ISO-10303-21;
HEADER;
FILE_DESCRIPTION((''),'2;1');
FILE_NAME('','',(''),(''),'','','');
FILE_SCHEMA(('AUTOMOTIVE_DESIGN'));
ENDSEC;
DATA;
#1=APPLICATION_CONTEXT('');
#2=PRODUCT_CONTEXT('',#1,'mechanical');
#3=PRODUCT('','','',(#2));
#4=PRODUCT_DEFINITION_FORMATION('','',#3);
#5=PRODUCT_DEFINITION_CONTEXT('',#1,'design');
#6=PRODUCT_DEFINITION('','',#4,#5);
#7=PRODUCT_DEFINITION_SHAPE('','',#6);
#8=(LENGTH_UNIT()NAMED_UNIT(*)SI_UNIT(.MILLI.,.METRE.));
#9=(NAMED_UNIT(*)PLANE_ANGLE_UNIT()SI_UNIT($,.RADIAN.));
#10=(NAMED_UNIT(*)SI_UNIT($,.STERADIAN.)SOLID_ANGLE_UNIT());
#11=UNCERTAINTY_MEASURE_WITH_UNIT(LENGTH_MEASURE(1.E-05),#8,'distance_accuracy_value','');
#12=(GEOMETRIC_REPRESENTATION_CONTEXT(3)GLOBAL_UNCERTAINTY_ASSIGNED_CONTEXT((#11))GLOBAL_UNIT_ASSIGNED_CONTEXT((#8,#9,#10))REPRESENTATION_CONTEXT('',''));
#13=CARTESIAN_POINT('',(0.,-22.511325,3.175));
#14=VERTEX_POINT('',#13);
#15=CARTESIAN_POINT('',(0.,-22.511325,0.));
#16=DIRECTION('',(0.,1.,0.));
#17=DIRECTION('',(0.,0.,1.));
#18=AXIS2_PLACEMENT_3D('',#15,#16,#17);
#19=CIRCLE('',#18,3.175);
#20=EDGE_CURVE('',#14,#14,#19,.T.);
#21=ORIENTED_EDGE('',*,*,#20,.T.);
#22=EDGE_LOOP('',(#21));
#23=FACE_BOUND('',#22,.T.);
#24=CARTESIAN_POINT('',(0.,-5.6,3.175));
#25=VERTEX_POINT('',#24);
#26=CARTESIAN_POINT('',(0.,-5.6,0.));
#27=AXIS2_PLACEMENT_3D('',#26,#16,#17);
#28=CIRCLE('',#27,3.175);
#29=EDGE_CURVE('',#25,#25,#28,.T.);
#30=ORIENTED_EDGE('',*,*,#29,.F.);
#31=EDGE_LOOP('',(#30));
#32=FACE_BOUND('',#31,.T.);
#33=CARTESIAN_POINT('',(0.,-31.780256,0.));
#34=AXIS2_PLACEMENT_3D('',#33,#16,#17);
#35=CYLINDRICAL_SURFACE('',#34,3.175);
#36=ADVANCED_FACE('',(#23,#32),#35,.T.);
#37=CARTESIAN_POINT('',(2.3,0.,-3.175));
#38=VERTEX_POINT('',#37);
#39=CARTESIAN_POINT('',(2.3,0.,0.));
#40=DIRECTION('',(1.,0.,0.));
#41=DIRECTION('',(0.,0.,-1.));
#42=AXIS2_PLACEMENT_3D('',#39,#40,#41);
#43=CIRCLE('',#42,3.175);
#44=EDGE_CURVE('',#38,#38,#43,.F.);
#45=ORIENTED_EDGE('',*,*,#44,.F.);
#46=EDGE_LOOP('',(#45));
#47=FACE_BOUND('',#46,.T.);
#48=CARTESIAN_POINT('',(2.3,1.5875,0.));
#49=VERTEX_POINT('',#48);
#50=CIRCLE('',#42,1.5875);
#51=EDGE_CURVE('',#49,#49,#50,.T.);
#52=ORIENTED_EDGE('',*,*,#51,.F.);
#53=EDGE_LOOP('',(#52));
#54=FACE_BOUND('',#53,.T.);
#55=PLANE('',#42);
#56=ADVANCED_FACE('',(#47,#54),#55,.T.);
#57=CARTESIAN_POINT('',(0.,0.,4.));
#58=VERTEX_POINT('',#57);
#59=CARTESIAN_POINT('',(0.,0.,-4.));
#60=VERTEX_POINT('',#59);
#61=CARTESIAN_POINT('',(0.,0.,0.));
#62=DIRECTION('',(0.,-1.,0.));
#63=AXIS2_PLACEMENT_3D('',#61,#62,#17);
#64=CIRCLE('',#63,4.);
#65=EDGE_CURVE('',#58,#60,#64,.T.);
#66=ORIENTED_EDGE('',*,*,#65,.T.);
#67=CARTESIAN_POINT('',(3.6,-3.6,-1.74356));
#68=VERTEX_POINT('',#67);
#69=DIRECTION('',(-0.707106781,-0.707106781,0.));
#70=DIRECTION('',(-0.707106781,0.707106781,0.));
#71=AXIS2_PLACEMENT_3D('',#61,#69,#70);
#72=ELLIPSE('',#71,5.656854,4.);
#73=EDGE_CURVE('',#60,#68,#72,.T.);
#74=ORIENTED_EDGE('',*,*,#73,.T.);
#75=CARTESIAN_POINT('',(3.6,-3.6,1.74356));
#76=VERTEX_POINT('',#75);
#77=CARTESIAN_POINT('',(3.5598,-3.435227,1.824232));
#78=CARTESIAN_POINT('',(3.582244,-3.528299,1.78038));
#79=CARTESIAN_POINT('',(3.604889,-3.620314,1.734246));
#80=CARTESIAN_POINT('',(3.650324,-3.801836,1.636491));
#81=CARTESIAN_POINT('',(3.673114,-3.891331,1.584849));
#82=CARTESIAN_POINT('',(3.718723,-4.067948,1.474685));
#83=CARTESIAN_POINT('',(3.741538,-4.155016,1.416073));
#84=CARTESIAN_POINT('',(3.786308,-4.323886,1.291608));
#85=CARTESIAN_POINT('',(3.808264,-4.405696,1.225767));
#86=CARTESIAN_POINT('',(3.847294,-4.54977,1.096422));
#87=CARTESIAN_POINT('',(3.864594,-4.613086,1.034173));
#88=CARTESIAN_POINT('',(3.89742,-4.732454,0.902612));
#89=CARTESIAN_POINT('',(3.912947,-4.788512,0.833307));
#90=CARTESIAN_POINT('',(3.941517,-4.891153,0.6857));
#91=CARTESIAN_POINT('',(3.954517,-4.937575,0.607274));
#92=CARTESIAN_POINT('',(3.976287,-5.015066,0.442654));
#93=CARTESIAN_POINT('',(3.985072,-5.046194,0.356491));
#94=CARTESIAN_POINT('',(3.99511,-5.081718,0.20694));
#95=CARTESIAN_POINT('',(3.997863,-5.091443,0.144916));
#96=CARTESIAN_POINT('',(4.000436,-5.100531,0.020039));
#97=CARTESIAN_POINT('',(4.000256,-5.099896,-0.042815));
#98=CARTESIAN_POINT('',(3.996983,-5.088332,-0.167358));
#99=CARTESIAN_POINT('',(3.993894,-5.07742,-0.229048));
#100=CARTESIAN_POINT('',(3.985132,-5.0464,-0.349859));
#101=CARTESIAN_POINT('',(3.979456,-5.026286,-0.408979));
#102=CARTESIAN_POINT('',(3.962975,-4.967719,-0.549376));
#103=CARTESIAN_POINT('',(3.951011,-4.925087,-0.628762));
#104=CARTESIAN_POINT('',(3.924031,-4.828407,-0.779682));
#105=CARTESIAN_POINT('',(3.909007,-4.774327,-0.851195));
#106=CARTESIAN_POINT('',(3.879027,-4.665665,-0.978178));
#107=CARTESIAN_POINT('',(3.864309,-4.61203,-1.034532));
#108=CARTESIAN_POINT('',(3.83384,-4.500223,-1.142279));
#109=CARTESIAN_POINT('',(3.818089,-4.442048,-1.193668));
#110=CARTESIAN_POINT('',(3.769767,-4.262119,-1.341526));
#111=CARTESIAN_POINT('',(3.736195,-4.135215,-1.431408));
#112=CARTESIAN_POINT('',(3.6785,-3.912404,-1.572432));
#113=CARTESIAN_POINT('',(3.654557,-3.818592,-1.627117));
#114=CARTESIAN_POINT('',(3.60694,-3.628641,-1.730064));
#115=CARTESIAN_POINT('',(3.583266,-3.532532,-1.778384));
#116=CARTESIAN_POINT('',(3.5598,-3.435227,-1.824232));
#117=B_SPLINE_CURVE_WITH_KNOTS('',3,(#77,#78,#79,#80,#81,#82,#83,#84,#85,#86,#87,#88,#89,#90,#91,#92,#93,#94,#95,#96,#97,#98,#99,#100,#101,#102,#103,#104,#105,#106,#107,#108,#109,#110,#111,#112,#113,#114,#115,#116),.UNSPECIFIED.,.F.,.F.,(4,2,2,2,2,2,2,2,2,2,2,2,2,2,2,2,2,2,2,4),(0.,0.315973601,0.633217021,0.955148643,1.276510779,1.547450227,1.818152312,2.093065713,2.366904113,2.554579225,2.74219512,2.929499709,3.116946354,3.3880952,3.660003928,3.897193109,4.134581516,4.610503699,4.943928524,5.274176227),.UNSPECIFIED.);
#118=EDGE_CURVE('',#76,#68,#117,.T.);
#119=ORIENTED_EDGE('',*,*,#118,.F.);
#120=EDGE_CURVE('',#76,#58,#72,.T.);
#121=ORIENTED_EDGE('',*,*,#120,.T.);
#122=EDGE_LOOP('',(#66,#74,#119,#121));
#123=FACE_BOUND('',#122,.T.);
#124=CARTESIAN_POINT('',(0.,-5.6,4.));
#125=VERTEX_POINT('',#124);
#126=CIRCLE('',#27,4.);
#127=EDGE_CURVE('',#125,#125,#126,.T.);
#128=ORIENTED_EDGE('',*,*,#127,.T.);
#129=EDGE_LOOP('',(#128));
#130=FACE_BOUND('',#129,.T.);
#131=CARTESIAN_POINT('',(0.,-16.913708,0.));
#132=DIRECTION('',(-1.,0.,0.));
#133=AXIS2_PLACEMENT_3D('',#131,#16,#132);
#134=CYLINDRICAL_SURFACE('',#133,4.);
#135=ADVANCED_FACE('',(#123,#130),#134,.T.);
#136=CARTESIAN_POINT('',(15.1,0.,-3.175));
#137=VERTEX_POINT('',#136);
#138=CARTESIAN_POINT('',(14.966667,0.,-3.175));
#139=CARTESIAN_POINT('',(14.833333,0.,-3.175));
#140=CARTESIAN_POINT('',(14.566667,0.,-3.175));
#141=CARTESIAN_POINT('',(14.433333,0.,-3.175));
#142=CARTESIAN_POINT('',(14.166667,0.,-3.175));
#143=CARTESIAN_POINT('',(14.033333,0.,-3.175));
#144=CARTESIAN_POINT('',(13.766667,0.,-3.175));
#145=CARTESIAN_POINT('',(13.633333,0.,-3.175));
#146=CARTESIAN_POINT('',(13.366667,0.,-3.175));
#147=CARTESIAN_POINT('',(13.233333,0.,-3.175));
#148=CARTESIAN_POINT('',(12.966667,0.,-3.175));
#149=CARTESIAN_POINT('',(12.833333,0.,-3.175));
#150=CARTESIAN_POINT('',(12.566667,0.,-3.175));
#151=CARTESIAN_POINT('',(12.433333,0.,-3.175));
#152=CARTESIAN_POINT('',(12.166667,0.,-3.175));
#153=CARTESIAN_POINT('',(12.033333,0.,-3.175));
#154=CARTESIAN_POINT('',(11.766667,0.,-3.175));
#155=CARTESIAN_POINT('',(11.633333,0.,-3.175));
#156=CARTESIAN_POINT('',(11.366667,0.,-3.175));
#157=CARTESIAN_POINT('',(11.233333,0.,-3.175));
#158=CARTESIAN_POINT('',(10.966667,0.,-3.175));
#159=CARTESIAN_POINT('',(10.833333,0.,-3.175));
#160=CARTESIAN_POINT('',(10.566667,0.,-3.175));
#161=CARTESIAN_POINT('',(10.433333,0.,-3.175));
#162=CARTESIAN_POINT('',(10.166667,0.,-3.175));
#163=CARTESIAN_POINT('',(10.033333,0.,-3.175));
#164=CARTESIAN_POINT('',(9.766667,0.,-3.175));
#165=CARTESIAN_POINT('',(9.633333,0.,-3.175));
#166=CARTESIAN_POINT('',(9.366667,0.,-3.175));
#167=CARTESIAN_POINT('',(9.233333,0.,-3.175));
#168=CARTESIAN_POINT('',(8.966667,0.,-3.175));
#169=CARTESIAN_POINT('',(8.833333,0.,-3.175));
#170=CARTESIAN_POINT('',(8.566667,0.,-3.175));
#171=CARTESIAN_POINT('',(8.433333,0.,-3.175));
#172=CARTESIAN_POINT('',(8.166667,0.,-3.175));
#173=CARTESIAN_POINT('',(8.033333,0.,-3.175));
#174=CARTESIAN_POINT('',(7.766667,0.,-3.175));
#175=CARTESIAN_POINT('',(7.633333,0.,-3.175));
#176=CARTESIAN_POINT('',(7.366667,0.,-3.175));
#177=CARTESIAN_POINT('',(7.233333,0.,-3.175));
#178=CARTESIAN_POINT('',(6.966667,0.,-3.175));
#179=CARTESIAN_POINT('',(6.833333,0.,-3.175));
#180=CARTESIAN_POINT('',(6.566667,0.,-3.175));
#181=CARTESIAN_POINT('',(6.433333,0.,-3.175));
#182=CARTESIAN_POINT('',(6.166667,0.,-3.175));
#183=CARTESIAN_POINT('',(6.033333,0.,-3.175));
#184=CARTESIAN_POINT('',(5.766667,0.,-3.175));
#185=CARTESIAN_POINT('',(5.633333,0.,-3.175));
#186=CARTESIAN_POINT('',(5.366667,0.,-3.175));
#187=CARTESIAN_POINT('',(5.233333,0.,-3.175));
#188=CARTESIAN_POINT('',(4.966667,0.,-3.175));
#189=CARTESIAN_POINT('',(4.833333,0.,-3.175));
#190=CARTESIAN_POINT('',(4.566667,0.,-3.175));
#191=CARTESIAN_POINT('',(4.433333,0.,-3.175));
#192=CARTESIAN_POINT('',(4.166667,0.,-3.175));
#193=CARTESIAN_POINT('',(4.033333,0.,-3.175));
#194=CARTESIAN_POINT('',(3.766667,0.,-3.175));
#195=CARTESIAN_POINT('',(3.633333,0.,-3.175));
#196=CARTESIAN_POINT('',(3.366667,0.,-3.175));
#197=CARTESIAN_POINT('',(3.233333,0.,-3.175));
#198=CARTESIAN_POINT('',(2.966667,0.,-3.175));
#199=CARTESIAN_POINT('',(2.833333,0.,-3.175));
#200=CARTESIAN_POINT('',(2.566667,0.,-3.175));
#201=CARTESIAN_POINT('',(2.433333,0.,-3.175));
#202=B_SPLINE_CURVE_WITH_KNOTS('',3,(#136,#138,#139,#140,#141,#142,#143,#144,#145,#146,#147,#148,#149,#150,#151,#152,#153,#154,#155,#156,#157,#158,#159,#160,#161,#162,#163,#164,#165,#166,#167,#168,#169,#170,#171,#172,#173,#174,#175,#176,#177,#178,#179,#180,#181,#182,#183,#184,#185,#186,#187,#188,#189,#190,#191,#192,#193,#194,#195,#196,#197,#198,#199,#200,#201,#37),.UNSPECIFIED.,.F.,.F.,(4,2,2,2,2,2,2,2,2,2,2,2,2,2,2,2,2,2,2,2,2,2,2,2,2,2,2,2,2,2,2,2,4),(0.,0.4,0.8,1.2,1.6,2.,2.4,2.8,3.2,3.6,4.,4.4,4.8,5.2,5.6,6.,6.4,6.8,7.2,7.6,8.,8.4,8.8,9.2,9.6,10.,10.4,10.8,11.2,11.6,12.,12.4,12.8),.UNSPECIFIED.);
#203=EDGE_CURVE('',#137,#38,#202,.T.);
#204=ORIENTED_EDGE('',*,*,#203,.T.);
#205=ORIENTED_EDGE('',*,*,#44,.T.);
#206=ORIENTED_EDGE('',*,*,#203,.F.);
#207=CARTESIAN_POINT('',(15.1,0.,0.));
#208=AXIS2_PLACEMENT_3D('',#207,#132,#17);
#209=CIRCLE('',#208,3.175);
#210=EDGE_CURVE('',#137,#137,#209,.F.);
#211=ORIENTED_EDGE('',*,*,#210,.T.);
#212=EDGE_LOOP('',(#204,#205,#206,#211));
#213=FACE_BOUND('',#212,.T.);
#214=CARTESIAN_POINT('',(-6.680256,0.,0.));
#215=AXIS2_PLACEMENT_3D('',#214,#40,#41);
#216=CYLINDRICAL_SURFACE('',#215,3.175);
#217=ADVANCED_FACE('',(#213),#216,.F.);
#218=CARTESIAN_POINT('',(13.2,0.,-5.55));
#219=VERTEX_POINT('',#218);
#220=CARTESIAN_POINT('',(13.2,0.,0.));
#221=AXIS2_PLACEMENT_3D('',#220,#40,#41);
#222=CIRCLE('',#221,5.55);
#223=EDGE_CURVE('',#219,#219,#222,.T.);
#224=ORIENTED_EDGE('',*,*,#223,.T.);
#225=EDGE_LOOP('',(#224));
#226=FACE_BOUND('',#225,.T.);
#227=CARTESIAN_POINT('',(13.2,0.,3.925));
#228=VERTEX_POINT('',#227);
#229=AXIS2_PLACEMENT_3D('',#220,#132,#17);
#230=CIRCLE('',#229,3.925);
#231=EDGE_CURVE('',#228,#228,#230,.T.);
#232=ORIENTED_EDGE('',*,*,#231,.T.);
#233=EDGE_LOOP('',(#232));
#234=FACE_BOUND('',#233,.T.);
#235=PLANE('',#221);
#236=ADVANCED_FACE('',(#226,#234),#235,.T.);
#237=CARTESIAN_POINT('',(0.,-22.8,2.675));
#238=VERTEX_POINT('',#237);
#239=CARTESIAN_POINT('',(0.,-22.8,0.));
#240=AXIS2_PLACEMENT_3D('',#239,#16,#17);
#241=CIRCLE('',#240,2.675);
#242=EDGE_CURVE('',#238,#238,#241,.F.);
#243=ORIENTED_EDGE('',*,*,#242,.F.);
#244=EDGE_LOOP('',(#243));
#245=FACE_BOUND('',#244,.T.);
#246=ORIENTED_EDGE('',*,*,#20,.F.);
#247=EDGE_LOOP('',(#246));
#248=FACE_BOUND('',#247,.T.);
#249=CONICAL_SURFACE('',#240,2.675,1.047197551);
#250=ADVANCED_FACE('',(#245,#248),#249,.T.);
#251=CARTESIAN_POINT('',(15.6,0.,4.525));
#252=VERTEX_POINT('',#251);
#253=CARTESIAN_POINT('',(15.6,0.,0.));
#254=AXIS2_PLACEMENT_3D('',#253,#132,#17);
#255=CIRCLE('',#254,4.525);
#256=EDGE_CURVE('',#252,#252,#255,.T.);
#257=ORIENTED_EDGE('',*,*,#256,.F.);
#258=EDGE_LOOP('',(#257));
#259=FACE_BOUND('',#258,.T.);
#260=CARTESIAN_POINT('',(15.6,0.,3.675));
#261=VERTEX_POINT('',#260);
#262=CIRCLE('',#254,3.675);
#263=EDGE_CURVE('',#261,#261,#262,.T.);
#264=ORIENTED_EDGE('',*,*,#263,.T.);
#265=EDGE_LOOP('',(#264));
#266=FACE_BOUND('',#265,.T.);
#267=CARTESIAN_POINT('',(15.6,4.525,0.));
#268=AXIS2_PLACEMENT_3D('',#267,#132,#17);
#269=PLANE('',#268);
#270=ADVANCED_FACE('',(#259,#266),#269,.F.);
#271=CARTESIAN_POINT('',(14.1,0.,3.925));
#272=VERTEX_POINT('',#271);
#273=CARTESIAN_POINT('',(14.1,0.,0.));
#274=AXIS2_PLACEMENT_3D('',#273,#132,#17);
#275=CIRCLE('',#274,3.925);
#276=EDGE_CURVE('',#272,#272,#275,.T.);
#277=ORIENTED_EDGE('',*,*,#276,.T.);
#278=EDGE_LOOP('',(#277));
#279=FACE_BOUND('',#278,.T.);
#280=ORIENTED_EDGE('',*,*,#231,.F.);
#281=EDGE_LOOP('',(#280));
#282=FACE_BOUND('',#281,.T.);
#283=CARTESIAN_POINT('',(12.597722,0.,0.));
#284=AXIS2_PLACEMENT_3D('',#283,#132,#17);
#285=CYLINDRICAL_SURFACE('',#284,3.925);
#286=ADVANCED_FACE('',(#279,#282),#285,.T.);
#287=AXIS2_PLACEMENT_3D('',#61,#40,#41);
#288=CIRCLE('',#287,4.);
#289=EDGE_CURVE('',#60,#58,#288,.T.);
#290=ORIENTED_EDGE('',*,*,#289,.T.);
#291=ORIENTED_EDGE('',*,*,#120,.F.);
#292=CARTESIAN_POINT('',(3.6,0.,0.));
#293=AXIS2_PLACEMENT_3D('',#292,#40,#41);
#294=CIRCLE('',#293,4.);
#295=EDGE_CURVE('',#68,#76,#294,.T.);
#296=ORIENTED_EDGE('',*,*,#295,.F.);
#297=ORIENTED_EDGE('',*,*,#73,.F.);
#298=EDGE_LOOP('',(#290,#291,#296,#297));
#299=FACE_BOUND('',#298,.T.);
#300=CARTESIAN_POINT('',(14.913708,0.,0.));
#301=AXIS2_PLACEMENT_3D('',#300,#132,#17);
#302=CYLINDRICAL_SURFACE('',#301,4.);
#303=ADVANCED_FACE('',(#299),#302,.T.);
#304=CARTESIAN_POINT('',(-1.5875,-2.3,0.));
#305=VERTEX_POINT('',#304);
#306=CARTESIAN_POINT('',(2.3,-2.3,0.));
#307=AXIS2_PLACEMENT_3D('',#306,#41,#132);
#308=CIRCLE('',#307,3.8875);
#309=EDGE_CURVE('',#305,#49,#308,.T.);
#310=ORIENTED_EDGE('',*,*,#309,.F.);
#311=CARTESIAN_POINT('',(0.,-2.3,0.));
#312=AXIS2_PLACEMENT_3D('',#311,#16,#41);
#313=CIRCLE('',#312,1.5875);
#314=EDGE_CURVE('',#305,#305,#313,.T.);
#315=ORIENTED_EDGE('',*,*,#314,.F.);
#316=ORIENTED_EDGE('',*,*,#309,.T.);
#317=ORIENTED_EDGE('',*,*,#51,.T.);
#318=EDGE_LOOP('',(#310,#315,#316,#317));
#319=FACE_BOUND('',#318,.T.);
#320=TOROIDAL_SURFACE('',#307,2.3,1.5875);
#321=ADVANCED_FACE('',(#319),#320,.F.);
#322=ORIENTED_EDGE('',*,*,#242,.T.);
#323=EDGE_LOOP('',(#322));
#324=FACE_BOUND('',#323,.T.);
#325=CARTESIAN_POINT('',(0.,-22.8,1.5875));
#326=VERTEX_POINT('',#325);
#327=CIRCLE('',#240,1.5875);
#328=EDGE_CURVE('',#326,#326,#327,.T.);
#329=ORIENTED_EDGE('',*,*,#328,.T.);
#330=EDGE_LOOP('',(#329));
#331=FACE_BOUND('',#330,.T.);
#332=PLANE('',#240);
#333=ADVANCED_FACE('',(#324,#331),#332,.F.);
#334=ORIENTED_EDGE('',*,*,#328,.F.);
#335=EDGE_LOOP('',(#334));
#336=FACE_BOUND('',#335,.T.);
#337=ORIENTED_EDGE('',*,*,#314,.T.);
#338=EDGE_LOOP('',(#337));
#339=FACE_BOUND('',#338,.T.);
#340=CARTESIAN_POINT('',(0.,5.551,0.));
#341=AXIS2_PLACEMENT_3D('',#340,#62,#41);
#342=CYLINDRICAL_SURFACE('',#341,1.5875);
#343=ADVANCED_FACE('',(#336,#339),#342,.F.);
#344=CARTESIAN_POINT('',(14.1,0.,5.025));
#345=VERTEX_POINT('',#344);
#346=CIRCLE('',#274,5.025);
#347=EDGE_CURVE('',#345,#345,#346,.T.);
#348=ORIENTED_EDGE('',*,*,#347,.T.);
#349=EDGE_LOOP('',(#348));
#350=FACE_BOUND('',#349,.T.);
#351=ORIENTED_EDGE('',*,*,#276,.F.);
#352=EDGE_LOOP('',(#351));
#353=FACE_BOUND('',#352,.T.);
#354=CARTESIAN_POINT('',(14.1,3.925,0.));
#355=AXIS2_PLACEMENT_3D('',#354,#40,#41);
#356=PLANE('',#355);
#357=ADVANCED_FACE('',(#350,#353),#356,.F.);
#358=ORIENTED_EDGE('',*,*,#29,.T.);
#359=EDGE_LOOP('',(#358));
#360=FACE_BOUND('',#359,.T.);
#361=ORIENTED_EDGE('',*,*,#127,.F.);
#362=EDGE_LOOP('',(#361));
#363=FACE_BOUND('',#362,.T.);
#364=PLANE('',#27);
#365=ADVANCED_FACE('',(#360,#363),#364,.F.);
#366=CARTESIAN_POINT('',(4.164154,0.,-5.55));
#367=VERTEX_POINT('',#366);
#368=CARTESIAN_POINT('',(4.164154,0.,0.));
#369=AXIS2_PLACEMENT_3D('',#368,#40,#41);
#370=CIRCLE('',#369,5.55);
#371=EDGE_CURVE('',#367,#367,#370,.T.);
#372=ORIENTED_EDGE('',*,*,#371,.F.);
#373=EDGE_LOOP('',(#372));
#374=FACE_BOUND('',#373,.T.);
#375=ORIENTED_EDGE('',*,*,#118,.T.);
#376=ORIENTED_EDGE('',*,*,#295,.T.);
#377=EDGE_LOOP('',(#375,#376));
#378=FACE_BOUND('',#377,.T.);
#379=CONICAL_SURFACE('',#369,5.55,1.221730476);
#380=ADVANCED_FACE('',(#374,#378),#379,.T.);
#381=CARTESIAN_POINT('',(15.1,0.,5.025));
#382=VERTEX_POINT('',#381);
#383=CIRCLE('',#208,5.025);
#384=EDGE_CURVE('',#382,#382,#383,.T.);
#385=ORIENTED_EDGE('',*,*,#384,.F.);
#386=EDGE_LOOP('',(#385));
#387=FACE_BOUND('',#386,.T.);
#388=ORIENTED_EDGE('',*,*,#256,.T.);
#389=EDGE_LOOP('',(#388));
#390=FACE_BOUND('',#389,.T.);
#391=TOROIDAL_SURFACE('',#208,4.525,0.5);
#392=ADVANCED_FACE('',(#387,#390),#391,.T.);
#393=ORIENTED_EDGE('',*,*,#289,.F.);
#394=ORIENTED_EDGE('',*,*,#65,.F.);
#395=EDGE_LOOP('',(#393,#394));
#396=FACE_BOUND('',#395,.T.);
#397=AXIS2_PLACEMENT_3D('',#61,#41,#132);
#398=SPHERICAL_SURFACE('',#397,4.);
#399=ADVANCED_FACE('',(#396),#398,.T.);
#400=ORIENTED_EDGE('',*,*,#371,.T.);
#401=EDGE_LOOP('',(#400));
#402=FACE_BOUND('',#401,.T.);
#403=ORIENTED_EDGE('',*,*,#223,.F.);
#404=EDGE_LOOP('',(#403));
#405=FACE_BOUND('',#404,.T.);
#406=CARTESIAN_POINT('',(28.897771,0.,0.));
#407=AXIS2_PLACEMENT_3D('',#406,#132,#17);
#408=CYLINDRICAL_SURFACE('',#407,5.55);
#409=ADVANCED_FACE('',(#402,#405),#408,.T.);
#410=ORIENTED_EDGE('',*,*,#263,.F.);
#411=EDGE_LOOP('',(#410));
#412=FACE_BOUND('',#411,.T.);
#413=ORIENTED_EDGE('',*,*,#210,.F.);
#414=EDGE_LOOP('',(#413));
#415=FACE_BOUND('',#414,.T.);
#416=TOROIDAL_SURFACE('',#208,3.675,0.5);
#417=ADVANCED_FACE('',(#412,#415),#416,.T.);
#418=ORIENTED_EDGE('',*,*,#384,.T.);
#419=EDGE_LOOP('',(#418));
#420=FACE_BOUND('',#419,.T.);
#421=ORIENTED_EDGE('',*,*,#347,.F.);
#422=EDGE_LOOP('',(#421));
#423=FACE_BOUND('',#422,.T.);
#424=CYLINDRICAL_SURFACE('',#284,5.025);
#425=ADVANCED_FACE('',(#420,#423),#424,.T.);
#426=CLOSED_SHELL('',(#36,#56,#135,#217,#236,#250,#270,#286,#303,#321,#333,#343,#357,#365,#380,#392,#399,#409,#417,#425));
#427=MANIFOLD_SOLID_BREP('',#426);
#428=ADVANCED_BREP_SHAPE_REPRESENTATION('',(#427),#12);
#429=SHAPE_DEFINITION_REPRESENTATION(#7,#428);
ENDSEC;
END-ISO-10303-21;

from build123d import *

# Parameters (mm, degrees)
SKETCH1_R             = 4
BASE_EXTRUDE_DEPTH    = 3.6
RBODY_SKETCH_R        = 5.55
RBODY_DEPTH           = 9.6
ELBOW_ANGLE           = 90
SKETCH3_R             = 4
BOSS_EXTRUDE1_DEPTH   = 5.6
STEM_SKETCH_R         = 3.175
STEM_DEPTH            = 17.2
RTUBE_START           = -13.3
RTUBE_SKETCH_R        = 3.175
RTUBE_DEPTH           = 13.3
RTUBE_RADIUS_R        = 0.5
DIAMETER_R            = 1.5875
PORT_THREADS_REACH    = 34.831
PORT_THREADS_SKETCH_R = 1.5875


with BuildPart() as part:
    # Sketch1 → Base-Extrude (new body)
    with BuildSketch(Plane(origin=(0, 0, 0), x_dir=(0, 0, -1), z_dir=(1, 0, 0))):
        with Locations(Location((0, 0, 0), (0, 0, 180))):
            Circle(SKETCH1_R)
    extrude(amount=BASE_EXTRUDE_DEPTH)

    # RBody_Sketch → RBody (add)
    with BuildSketch(Plane(origin=(3.6, 0, 0), x_dir=(0, 0, -1), z_dir=(1, 0, 0))):
        Circle(RBODY_SKETCH_R)
    extrude(amount=RBODY_DEPTH)

    # RBody_Chamfer: read off the stored shape, not the designer's step
    # RBody_Chamfer outline → RBody_Chamfer (revolve, cut)
    with BuildSketch(Plane.YX):
        Polygon((5.55, 4.164153863), (4, 3.6), (5.55, 3.6), align=None)
    revolve(axis=Axis((0, 0, 0), (1, 0, 0)), mode=Mode.SUBTRACT)

    # RRelease_Sketch → RRelease (revolve)
    with BuildSketch(Plane.XY, mode=Mode.PRIVATE) as rrelease_sk:
        with BuildLine():
            Line((13.2, 3.925), (14.1, 3.925))
            Line((14.1, 3.925), (14.1, 5.025))
            Line((14.1, 5.025), (15.1, 5.025))
            ThreePointArc((15.1, 5.025), (15.453553391, 4.878553391), (15.6, 4.525))
            Line((15.6, 4.525), (15.6, 0))
            Line((15.6, 0), (13.2, 0))
            Line((13.2, 0), (13.2, 3.925))
        make_face()
    revolve(rrelease_sk.sketch.rotate(Axis((12.597722381, 0, 0), (1, 0, 0)), 90), axis=Axis((12.597722381, 0, 0), (1, 0, 0)))

    # Elbow_Sketch → Elbow (revolve)
    with BuildSketch(Plane.ZY):
        with BuildLine():
            Line((-4, 0), (4, 0))
            ThreePointArc((4, 0), (0, 4), (-4, 0))
        make_face()
    revolve(axis=Axis((0, 0, -6.487672297), (0, 0, 1)), revolution_arc=ELBOW_ANGLE)

    # Sketch3 → Boss-Extrude1 (add)
    with BuildSketch(Plane.XZ):
        with Locations(Location((0, 0, 0), (0, 0, 90))):
            Circle(SKETCH3_R)
    extrude(amount=BOSS_EXTRUDE1_DEPTH)

    # Stem_Sketch → Stem (add)
    with BuildSketch(Plane(origin=(0, -5.6, 0), x_dir=(-1, 0, 0), z_dir=(0, 1, 0))):
        with Locations(Location((0, 0, 0), (0, 0, 90))):
            Circle(STEM_SKETCH_R)
    extrude(amount=-STEM_DEPTH)

    # RTube_Sketch → RTube (cut)
    with BuildSketch(Plane(origin=(15.6, 0, 0), x_dir=(0, 0, -1), z_dir=(1, 0, 0)).offset(RTUBE_START)):
        Circle(RTUBE_SKETCH_R)
    extrude(amount=RTUBE_DEPTH, mode=Mode.SUBTRACT)

    # RTube_Radius
    rtube_radius_edges = [part.edges().sort_by_distance(p)[0] for p in [
        (15.6, 0, 3.175),
    ]]
    fillet(rtube_radius_edges, radius=RTUBE_RADIUS_R)

    # Stem_Chamfer: read off the stored shape, not the designer's step
    # Stem_Chamfer outline → Stem_Chamfer (revolve, cut)
    with BuildSketch(Plane.XY):
        Polygon((3.175, -22.511324865), (2.675, -22.8), (3.175, -22.8), align=None)
    revolve(axis=Axis((0, 0, 0), (0, 1, 0)), mode=Mode.SUBTRACT)

    # Port_Curve: sweep along a path in Profile
    with BuildLine(Plane.XY) as port_curve_path:
        ThreePointArc((2.3, 0), (0.673654403, -0.673654403), (0, -2.3))
    # Diameter → Port_Curve (sweep, cut)
    with BuildSketch(Plane(origin=(2.3, 0, 0), x_dir=(0, 0, -1), z_dir=(1, 0, 0))):
        Circle(DIAMETER_R)
    sweep(path=port_curve_path.line, mode=Mode.SUBTRACT)

    # Port_Threads_Sketch → Port_Threads (cut, up to next)
    with BuildSketch(Plane(origin=(0, -22.8, 0), x_dir=(-1, 0, 0), z_dir=(0, 1, 0)), mode=Mode.PRIVATE) as port_threads_sk1:
        Circle(PORT_THREADS_SKETCH_R)
    port_threads_tool1 = extrude(port_threads_sk1.sketch, amount=PORT_THREADS_REACH, mode=Mode.PRIVATE) & part.part
    add(port_threads_tool1.solids().sort_by_distance((0, -22.8, 0))[0], mode=Mode.SUBTRACT)


solid = part.part
